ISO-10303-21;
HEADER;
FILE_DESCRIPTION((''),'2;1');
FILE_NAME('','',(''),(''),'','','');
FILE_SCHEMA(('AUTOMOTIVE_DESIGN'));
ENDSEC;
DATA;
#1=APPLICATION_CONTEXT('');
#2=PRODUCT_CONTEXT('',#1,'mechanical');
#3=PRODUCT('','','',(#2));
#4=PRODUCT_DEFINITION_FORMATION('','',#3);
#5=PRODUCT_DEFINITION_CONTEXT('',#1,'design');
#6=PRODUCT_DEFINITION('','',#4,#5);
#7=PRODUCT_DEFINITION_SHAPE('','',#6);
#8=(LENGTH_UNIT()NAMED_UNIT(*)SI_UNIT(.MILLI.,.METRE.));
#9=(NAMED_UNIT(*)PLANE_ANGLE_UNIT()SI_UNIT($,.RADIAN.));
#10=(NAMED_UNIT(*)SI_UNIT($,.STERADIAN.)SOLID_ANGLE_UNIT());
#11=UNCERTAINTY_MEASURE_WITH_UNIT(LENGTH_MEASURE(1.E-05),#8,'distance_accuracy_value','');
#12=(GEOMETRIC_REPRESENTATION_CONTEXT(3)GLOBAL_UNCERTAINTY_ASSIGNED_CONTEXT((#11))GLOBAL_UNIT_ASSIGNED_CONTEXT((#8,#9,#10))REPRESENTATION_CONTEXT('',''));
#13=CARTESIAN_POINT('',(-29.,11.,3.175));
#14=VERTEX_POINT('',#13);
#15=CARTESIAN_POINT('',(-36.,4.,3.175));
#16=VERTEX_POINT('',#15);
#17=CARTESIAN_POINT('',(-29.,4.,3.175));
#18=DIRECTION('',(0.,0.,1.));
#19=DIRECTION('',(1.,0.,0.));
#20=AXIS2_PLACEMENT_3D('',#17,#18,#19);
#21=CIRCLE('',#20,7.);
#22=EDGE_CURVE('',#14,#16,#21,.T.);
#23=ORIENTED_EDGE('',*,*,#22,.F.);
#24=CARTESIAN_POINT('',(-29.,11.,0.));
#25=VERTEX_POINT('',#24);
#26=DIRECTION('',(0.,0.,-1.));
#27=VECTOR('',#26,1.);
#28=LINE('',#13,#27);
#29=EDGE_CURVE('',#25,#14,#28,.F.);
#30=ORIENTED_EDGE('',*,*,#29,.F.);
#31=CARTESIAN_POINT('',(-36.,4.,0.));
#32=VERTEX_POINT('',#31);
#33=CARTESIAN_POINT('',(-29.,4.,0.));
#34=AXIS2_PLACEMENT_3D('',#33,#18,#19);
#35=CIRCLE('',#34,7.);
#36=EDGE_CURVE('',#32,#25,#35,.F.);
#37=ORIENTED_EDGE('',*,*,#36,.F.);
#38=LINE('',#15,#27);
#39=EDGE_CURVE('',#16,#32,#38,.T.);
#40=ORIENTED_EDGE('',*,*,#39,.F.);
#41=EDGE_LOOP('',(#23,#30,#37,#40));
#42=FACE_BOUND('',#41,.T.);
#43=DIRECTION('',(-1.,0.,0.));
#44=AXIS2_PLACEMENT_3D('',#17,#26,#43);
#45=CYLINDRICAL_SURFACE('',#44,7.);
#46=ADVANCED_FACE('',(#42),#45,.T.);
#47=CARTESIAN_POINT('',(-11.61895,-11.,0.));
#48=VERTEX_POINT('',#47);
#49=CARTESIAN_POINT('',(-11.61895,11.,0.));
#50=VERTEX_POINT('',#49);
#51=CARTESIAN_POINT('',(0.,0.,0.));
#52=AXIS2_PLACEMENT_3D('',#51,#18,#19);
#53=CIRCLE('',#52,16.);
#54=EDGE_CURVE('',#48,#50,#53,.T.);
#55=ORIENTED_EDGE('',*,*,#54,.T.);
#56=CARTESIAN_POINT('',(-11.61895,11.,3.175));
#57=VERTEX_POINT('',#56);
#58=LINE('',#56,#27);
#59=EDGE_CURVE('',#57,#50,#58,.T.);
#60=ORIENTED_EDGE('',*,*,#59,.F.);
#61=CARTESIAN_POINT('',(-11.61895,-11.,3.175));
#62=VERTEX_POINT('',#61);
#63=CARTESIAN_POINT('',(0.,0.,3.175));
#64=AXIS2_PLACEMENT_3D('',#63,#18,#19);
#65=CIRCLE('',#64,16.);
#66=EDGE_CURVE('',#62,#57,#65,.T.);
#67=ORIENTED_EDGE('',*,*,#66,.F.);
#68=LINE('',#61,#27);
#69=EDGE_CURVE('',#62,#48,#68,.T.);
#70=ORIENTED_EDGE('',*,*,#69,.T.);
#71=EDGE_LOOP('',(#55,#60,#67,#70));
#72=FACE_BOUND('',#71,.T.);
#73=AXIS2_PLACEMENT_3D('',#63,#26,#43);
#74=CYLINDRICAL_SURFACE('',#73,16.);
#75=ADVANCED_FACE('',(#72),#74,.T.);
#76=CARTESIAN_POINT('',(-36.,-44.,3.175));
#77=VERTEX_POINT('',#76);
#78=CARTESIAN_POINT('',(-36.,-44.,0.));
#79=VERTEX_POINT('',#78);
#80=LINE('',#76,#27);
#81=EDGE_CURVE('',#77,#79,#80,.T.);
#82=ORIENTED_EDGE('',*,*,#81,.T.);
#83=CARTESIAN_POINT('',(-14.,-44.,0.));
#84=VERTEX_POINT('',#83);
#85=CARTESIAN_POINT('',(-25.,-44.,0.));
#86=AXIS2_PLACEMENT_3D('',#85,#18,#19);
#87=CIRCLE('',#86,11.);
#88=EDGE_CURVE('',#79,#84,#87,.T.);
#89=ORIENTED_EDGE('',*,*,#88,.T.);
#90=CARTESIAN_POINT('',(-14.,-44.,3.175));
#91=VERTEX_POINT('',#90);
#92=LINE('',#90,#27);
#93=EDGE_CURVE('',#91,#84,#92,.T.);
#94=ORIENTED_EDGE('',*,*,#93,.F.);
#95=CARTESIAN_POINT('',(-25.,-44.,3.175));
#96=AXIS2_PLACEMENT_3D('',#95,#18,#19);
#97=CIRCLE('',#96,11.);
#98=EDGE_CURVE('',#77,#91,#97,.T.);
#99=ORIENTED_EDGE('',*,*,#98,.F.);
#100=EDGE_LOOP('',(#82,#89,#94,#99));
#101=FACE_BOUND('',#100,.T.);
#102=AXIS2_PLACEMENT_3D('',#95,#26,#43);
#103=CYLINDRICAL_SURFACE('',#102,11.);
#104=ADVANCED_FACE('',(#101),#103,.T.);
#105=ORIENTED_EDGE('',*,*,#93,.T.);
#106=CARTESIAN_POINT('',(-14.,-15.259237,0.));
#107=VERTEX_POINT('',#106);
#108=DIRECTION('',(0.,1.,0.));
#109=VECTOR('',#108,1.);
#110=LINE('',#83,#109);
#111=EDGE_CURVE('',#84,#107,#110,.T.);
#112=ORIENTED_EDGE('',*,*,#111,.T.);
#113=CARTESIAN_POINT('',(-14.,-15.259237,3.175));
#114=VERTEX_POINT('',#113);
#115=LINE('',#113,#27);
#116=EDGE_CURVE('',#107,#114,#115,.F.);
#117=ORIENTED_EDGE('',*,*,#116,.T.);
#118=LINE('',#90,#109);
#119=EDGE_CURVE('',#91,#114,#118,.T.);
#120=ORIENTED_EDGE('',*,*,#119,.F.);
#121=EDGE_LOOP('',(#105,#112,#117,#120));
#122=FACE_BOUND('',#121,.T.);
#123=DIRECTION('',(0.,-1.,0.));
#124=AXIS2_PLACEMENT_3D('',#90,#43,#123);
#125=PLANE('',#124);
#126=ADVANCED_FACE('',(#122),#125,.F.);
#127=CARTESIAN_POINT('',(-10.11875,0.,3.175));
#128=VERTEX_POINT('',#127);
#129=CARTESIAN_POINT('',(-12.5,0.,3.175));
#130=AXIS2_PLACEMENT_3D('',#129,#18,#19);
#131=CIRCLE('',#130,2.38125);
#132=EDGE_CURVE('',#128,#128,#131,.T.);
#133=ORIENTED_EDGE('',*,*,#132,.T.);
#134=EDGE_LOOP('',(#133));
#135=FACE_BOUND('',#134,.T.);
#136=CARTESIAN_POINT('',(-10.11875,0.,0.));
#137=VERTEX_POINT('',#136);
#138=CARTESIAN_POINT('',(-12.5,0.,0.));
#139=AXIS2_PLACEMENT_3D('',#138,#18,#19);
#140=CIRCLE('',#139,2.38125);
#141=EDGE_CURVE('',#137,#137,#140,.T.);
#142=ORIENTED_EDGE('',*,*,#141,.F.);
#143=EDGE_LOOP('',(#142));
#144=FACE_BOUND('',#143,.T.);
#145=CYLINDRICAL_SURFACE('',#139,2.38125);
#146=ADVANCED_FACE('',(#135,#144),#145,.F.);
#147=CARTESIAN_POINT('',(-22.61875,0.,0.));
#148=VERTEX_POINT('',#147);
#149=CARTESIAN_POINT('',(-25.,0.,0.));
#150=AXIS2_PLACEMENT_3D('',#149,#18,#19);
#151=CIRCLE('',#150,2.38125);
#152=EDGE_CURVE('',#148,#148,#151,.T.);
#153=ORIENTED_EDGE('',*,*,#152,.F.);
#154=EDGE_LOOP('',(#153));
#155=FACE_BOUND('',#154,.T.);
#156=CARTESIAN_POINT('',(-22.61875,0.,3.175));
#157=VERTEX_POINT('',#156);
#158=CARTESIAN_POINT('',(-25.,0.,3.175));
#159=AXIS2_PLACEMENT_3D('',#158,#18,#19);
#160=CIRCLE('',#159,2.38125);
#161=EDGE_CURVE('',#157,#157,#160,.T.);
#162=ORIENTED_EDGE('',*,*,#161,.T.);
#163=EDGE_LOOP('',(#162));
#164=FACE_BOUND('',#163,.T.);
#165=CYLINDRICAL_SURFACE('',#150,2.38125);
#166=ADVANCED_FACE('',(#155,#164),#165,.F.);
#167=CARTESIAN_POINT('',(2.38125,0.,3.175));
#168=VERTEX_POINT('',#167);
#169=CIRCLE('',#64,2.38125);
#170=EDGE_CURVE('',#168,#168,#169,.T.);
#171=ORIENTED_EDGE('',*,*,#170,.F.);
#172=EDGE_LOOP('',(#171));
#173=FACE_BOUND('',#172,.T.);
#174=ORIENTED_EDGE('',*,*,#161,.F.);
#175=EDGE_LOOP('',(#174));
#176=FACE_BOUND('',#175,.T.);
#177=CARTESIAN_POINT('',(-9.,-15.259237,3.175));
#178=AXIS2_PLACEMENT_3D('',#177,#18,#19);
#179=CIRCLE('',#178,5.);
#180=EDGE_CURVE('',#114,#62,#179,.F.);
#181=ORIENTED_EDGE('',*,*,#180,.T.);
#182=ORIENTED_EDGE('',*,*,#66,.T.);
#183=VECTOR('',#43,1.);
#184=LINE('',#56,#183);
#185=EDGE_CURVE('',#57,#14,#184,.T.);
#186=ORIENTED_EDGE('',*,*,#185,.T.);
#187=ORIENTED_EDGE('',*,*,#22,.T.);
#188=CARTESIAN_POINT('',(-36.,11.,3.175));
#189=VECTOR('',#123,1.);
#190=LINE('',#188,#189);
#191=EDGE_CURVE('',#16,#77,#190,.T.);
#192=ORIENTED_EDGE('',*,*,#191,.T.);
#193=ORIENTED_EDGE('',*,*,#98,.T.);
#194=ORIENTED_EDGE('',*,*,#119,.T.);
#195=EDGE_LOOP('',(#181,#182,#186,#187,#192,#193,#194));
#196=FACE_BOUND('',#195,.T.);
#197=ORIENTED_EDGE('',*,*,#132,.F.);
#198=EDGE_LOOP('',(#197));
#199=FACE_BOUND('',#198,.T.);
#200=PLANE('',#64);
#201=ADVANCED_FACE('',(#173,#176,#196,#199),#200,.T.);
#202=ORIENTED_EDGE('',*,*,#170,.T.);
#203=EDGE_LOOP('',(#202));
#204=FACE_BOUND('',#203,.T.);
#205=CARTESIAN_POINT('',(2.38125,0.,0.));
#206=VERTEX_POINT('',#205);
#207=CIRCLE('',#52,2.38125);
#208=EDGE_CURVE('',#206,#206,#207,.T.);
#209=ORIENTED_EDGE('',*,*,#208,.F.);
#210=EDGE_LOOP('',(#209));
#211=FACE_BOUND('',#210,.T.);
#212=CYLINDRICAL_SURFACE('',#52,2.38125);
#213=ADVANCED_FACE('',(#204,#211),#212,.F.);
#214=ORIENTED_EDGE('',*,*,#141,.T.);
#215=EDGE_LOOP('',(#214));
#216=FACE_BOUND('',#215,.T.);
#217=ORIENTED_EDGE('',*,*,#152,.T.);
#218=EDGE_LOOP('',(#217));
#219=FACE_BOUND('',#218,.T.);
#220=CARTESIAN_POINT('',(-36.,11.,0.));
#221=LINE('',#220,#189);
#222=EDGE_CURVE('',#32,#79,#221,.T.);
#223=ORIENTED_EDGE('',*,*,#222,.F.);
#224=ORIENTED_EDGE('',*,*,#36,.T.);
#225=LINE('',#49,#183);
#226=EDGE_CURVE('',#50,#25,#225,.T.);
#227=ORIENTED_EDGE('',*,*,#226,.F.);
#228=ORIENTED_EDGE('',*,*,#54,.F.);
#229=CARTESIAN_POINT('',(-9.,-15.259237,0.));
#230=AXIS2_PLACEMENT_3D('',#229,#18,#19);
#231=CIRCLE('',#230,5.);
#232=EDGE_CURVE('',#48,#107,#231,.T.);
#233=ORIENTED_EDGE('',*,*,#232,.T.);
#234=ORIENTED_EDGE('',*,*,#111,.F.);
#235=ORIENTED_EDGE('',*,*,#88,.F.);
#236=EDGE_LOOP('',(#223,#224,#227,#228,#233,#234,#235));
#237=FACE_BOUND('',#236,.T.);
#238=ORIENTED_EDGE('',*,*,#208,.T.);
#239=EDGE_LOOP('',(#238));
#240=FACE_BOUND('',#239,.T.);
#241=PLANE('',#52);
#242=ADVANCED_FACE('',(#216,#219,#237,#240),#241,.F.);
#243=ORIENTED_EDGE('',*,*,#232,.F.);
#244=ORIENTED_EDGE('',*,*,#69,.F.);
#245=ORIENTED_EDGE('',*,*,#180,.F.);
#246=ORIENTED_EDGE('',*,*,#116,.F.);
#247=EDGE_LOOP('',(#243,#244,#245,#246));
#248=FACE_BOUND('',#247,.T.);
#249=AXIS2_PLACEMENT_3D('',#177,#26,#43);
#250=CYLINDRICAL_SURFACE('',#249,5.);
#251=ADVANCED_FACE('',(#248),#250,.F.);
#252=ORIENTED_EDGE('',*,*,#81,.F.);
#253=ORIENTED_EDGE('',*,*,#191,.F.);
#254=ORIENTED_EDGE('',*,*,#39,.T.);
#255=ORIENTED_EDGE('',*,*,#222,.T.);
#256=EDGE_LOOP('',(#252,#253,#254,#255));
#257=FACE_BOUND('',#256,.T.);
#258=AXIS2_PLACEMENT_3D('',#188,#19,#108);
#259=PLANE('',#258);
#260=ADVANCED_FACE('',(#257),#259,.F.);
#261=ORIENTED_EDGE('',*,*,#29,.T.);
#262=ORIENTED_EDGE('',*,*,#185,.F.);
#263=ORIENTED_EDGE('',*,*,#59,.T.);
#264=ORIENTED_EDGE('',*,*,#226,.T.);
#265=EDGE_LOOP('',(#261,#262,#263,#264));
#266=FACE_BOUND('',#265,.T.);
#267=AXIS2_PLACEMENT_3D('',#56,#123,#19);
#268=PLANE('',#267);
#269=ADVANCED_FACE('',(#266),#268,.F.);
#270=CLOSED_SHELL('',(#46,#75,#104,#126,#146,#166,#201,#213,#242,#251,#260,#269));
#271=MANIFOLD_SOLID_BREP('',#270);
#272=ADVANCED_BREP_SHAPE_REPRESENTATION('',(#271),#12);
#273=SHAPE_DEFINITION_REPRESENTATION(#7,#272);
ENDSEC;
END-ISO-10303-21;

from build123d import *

# Parameters (mm, degrees)
BOSS_EXTRUDE1_DEPTH = 3.175
FILLET1_R           = 7
FILLET2_R           = 5
SKETCH2_R           = 2.38125
CUT_EXTRUDE1_DEPTH  = 66.810946088
LPATTERN1_COUNT     = 3
LPATTERN1_PITCH     = 12.5


with BuildPart() as part:
    # Sketch1 → Boss-Extrude1 (new body)
    with BuildSketch(Plane.XY):
        with BuildLine():
            Line((-11.618950039, 11), (-36, 11))
            Line((-36, 11), (-36, -44))
            ThreePointArc((-36, -44), (-25, -55), (-14, -44))
            Line((-14, -44), (-14, -11))
            Line((-14, -11), (-11.618950039, -11))
            ThreePointArc((-11.618950039, -11), (16, 0), (-11.618950039, 11))
        make_face()
    extrude(amount=BOSS_EXTRUDE1_DEPTH)

    # Fillet1
    fillet1_edges = [part.edges().sort_by_distance(p)[0] for p in [
        (-36, 11, 1.5875),
    ]]
    fillet(fillet1_edges, radius=FILLET1_R)

    # Fillet2
    # the kernel refuses this fillet: 5 mm, written as the material it adds along each edge
    with BuildSketch(Plane(origin=(-14, -11, 0), x_dir=(1, 0, 0), z_dir=(0, 0, 1))) as fillet2_piece_1:
        with BuildLine():
            CenterArc((5, -4.259237102), FILLET2_R, 121.586822832, 58.413177168)
            Line((0, -4.259237102), (-0.1, -4.259237102))
            Line((-0.1, -4.259237102), (-0.1, 0))
            Line((-0.1, 0), (0, 0.1))
            ThreePointArc((0, 0.1), (1.190524981, 0.1), (2.328670961, 0.085184742))
            Line((2.328670961, 0.085184742), (2.381049961, 0))
        make_face()
    extrude(amount=3.175)

    # Sketch2 → Cut-Extrude1 (cut, through all)
    with BuildSketch(Plane.XY.offset(3.175)):
        Circle(SKETCH2_R)
    cut_extrude1 = extrude(amount=-CUT_EXTRUDE1_DEPTH, mode=Mode.SUBTRACT)

    # LPattern1: Cut-Extrude1 ×3
    with Locations(*[(-i * LPATTERN1_PITCH, 0, 0) for i in range(1, LPATTERN1_COUNT)]):
        add(cut_extrude1, mode=Mode.SUBTRACT)


solid = part.part
